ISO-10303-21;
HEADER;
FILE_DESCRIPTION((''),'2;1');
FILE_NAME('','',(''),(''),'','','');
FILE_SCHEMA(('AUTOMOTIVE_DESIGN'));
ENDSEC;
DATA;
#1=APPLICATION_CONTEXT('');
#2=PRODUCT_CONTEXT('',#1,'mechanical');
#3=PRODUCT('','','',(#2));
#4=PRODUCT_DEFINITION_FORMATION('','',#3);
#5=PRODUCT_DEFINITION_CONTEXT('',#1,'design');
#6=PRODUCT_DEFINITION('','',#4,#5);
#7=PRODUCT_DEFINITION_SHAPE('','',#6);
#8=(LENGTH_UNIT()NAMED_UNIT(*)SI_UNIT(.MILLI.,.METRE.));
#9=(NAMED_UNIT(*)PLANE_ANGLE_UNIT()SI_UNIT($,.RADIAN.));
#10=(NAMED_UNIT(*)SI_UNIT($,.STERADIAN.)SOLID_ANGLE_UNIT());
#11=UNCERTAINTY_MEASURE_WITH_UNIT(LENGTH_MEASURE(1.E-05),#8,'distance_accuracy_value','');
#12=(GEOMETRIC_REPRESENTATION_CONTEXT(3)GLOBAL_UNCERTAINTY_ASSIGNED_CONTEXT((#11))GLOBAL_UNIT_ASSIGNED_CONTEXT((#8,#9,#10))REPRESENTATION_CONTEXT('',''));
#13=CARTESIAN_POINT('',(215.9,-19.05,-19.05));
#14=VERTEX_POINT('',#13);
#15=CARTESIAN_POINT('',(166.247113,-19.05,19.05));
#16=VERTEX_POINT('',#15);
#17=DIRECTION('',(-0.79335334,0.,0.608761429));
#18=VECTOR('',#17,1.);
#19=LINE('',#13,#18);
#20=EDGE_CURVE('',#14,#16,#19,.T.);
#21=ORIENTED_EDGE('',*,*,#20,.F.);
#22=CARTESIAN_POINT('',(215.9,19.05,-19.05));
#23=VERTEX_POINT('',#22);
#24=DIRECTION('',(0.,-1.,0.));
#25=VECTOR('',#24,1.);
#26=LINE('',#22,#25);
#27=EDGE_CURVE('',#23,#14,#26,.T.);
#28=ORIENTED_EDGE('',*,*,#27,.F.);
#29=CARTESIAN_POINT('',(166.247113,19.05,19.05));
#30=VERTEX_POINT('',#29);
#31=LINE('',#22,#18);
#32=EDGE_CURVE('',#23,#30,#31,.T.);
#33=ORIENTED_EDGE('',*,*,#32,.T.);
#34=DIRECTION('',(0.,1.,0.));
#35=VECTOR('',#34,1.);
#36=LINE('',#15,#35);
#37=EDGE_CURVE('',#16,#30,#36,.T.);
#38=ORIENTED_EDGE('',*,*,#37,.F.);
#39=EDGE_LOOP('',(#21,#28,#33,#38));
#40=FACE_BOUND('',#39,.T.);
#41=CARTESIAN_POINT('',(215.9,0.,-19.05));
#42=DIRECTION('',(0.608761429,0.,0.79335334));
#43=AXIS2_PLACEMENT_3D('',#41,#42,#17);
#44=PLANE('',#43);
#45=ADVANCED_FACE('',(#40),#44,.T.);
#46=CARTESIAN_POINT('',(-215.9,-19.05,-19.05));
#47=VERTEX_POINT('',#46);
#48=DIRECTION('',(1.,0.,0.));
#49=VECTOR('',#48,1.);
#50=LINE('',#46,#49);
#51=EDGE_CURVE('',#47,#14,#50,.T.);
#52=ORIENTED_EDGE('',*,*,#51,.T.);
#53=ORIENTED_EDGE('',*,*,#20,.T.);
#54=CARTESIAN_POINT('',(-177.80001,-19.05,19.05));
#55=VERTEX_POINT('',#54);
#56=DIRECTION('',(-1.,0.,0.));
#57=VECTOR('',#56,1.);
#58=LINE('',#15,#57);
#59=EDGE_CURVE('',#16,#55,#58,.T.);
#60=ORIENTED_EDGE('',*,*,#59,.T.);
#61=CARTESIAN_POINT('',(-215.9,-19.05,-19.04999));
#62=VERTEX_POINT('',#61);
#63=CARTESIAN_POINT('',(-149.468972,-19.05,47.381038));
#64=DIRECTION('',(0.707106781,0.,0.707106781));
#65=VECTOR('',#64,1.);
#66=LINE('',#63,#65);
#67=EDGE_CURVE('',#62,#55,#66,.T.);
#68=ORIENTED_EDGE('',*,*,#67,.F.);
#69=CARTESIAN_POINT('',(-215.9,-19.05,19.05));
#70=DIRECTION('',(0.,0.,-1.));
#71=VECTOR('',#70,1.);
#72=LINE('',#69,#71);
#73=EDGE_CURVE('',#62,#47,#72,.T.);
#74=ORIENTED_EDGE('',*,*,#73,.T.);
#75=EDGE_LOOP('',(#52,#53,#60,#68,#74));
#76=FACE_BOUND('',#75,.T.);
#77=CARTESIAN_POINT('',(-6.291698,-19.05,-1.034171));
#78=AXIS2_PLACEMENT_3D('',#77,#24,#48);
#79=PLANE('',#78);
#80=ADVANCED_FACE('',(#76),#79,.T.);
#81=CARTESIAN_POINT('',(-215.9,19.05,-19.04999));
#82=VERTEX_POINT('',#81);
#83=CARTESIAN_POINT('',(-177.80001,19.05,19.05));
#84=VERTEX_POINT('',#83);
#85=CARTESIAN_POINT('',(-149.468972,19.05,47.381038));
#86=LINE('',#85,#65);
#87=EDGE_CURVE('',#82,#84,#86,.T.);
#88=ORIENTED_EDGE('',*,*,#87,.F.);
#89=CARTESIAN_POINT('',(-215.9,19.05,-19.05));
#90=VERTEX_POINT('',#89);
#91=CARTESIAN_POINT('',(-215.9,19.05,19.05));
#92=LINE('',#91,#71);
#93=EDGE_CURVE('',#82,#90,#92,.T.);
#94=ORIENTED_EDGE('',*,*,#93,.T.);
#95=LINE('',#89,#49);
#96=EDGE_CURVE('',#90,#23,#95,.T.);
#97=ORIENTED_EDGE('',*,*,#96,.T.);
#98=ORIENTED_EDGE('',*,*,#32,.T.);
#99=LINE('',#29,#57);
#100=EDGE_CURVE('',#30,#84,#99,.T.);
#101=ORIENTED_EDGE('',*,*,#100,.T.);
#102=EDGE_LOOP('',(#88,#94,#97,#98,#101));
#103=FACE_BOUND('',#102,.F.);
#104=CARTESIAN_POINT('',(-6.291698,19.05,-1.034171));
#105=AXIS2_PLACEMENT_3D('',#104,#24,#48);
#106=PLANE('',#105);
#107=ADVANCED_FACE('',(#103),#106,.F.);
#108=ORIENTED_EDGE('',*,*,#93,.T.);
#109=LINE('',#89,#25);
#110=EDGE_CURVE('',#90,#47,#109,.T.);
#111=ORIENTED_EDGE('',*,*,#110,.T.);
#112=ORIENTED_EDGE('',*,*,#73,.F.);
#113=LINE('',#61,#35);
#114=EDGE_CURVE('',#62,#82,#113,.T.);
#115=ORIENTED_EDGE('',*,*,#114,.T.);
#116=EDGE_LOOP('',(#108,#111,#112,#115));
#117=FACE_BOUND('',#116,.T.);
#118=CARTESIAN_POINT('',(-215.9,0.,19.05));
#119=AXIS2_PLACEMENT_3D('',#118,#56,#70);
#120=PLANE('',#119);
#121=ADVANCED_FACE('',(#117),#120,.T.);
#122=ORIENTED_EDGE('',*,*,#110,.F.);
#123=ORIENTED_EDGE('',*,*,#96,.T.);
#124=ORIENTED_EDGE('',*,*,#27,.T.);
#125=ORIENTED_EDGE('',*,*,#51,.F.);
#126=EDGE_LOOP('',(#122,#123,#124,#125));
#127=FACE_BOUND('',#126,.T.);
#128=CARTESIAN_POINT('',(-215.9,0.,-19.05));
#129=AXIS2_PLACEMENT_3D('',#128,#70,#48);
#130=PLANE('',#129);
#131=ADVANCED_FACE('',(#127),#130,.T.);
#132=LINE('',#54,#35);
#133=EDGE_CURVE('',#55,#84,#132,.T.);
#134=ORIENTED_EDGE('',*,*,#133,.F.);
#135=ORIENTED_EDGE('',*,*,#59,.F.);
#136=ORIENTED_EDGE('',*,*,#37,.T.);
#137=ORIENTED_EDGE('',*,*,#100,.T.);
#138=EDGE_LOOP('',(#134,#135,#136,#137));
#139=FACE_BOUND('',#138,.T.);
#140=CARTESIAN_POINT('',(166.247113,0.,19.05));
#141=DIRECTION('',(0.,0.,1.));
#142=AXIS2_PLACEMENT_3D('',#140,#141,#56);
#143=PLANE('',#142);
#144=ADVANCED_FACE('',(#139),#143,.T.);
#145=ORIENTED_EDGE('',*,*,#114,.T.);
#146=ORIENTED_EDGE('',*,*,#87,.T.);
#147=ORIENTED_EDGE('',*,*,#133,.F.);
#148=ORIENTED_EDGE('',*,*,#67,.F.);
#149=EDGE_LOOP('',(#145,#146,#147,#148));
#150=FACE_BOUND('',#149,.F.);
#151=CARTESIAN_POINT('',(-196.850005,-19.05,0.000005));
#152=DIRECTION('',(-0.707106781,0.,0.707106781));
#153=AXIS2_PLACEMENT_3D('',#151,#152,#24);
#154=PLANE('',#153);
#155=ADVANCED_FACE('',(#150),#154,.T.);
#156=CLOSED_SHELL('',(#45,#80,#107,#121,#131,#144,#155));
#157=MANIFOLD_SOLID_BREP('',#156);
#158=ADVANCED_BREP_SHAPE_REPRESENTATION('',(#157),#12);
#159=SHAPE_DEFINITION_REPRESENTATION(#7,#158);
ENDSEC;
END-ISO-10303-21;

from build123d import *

# Parameters (mm, degrees)
F1_DEPTH = 19.05
F2_SIZE  = 38.09999


# Not quite as in the source:
# - a fillet or chamfer is up to 0.001 mm smaller than in the source, because OpenCascade refuses the exact size


with BuildPart() as f1:
    # F0 (on Front) → F1 (new body, symmetric)
    with BuildSketch(Plane.XZ):
        Polygon((-215.9, 19.05), (-215.9, -19.05), (215.9, -19.05), (166.2471132948, 19.05), align=None)
    extrude(amount=F1_DEPTH, both=True)

    # F2 (size 38.1 in the source; OpenCascade refuses exactly that, so slightly less here)
    f2_edges = [f1.edges().sort_by_distance(p)[0] for p in [
        (-215.9, 0, 19.05),
    ]]
    chamfer(f2_edges, length=F2_SIZE)


solid = f1.part
